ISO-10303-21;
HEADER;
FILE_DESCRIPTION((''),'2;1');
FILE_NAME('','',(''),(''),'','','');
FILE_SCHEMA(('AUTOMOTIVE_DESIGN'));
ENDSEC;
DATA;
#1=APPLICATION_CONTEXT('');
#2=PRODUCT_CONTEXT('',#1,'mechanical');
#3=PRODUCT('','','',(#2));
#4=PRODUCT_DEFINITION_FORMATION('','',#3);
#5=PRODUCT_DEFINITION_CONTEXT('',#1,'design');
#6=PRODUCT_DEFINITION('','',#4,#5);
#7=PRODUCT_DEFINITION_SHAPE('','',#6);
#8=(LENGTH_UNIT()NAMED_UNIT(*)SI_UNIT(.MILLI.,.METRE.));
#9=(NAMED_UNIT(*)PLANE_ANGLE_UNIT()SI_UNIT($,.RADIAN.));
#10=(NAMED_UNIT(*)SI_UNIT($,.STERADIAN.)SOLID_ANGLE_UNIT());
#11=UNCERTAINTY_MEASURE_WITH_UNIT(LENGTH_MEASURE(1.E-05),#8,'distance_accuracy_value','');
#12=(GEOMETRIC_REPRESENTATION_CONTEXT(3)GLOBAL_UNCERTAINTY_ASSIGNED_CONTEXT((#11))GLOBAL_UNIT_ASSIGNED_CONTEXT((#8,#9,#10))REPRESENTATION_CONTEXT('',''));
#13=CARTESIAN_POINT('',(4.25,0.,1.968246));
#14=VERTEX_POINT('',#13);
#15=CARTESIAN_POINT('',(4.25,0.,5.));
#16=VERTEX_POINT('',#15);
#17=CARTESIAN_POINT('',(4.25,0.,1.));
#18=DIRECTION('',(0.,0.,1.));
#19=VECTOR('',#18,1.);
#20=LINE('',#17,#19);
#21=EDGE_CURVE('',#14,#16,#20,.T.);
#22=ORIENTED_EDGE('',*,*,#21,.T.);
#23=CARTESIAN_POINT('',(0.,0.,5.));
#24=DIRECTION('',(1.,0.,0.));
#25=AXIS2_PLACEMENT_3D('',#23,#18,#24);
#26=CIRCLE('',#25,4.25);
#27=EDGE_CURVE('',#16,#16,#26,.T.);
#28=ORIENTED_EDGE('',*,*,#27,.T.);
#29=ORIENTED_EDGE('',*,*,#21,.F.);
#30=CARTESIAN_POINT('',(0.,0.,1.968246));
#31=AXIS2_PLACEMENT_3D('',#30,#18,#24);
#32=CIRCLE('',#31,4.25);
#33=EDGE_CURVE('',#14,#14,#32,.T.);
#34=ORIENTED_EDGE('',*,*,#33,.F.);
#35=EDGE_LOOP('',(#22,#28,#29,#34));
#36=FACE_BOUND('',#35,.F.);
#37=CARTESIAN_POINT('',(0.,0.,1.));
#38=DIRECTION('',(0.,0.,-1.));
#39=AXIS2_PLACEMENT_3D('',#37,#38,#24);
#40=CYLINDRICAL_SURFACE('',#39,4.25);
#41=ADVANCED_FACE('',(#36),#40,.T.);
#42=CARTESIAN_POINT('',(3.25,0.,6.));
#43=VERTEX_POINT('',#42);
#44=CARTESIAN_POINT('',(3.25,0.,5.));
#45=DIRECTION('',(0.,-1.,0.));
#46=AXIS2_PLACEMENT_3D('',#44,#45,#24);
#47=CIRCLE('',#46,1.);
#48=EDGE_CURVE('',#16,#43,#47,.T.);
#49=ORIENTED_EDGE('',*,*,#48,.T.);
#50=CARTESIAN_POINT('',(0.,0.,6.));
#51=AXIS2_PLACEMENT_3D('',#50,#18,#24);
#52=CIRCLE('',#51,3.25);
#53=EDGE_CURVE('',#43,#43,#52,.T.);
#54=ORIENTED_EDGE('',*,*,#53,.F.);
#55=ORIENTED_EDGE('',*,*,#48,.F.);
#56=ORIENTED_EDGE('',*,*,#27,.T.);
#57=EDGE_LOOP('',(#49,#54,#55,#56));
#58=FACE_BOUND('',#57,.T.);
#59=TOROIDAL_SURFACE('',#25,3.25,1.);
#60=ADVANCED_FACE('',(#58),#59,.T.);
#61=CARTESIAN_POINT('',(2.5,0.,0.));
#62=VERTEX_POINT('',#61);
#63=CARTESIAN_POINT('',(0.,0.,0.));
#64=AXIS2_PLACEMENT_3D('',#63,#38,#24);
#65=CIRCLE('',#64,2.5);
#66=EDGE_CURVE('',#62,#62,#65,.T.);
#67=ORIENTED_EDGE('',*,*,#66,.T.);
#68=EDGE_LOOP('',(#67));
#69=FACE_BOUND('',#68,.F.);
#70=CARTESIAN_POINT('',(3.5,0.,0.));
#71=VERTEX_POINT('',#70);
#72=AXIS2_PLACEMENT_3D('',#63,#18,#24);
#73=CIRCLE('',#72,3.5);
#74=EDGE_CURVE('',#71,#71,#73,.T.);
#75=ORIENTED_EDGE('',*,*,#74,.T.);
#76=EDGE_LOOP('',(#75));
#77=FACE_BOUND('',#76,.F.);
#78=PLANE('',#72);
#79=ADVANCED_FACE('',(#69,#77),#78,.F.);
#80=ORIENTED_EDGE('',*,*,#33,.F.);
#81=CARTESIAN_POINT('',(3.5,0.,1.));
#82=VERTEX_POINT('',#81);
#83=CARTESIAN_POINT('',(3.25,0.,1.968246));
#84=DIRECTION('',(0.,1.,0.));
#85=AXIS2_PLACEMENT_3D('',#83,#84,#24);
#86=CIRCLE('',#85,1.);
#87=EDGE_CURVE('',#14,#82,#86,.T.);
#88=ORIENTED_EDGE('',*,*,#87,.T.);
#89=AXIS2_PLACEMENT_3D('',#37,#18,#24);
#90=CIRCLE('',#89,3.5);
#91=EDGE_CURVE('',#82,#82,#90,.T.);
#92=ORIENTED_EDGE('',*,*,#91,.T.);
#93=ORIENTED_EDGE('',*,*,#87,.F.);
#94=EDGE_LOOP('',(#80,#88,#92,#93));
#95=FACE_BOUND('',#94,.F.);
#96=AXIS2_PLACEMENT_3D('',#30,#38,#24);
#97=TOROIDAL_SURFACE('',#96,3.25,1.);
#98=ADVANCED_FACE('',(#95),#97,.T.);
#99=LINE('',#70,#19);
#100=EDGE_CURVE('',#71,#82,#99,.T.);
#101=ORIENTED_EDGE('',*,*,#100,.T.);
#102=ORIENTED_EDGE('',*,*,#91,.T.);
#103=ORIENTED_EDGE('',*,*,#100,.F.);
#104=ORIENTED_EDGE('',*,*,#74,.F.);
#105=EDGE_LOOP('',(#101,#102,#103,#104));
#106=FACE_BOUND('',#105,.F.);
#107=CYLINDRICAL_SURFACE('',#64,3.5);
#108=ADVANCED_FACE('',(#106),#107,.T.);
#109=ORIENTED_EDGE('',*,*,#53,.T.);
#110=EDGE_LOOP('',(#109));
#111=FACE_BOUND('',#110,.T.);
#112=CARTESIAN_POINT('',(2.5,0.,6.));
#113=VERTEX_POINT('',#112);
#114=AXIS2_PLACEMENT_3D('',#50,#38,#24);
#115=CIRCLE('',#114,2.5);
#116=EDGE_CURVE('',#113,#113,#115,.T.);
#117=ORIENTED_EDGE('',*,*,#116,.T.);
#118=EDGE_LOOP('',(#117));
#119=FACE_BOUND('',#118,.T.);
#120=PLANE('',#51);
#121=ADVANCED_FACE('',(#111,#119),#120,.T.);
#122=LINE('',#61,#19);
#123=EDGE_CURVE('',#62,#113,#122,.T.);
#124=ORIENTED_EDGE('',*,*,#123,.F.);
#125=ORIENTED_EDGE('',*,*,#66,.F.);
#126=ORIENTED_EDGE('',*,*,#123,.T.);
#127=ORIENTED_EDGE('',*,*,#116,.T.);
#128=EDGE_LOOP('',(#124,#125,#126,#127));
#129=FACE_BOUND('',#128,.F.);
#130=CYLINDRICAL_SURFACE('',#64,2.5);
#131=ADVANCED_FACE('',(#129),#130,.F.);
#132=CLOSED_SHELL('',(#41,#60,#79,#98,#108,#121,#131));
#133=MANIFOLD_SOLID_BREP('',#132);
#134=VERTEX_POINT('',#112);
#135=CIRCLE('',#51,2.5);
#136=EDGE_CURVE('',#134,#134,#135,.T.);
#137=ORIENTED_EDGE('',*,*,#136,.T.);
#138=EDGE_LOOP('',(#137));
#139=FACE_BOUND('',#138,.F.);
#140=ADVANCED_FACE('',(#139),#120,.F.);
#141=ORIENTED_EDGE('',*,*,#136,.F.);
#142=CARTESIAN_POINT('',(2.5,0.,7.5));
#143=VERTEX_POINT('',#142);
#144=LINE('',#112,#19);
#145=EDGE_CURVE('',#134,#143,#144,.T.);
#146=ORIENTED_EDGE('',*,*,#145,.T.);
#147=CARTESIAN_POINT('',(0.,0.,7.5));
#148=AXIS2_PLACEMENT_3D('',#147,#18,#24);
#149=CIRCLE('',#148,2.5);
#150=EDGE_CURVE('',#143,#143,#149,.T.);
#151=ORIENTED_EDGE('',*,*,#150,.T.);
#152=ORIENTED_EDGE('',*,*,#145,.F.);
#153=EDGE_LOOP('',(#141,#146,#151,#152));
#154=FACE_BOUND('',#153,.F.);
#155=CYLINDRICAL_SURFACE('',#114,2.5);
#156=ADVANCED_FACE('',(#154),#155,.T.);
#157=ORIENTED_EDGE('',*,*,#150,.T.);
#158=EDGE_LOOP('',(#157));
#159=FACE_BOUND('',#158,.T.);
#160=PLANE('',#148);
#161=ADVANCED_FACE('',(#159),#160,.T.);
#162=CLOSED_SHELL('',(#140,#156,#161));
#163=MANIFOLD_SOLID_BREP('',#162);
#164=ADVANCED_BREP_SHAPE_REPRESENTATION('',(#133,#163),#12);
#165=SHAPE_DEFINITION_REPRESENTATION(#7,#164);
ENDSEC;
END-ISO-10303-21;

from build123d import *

# Parameters (mm, degrees)
F0_R     = 3.5
F1_DEPTH = 1
F2_R     = 4.25
F3_DEPTH = 5
F4_R     = 2.5
F5_DEPTH = 1.5
F7_R     = 2.5
F8_DEPTH = 6


# Not quite as in the source:
# - a fillet or chamfer that OpenCascade refuses, or shapes differently, is made with other operations: its cross-section is extruded or revolved along the edge and cut away or added


with BuildPart() as f1:
    # F0 (on Top) → F1 (new body)
    with BuildSketch(Plane.XY):
        Circle(F0_R)
    extrude(amount=F1_DEPTH)

    # F2 (on face) → F3 (join)
    with BuildSketch(Plane.XY.offset(1)):
        Circle(F2_R)
    extrude(amount=F3_DEPTH)

    # F6: fillet of radius 1 on 2 edges, made by hand

    # F6_s1 → F6_t2 (revolve, cut)
    with BuildSketch(Plane.XZ):
        with BuildLine():
            ThreePointArc((4.25, 5), (3.9571067812, 5.7071067812), (3.25, 6))
            Line((3.25, 6), (4.25, 6))
            Line((4.25, 6), (4.25, 5))
        make_face()
    revolve(axis=Axis((0, 0, 6), (0, 0, 1)), mode=Mode.SUBTRACT)

    # F6_s3 → F6_t4 (revolve, cut)
    with BuildSketch(Plane.XZ):
        with BuildLine():
            ThreePointArc((4.25, 1.9682458366), (4.040569415, 1.3558734009), (3.5, 1))
            Line((3.5, 1), (4.25, 1))
            Line((4.25, 1), (4.25, 1.9682458366))
        make_face()
    revolve(axis=Axis((0, 0, 1), (0, 0, 1)), mode=Mode.SUBTRACT)

    # F7 (on face) → F8 (cut)
    with BuildSketch(Plane(origin=(0, 0, 0), x_dir=(1, 0, 0), z_dir=(0, 0, -1))):
        Circle(F7_R)
    extrude(amount=-F8_DEPTH, mode=Mode.SUBTRACT)


with BuildPart() as f5:
    # F4 (on face) → F5 (new body)
    with BuildSketch(Plane.XY.offset(6)):
        Circle(F4_R)
    extrude(amount=F5_DEPTH)


solid = Compound([f1.part, f5.part])
